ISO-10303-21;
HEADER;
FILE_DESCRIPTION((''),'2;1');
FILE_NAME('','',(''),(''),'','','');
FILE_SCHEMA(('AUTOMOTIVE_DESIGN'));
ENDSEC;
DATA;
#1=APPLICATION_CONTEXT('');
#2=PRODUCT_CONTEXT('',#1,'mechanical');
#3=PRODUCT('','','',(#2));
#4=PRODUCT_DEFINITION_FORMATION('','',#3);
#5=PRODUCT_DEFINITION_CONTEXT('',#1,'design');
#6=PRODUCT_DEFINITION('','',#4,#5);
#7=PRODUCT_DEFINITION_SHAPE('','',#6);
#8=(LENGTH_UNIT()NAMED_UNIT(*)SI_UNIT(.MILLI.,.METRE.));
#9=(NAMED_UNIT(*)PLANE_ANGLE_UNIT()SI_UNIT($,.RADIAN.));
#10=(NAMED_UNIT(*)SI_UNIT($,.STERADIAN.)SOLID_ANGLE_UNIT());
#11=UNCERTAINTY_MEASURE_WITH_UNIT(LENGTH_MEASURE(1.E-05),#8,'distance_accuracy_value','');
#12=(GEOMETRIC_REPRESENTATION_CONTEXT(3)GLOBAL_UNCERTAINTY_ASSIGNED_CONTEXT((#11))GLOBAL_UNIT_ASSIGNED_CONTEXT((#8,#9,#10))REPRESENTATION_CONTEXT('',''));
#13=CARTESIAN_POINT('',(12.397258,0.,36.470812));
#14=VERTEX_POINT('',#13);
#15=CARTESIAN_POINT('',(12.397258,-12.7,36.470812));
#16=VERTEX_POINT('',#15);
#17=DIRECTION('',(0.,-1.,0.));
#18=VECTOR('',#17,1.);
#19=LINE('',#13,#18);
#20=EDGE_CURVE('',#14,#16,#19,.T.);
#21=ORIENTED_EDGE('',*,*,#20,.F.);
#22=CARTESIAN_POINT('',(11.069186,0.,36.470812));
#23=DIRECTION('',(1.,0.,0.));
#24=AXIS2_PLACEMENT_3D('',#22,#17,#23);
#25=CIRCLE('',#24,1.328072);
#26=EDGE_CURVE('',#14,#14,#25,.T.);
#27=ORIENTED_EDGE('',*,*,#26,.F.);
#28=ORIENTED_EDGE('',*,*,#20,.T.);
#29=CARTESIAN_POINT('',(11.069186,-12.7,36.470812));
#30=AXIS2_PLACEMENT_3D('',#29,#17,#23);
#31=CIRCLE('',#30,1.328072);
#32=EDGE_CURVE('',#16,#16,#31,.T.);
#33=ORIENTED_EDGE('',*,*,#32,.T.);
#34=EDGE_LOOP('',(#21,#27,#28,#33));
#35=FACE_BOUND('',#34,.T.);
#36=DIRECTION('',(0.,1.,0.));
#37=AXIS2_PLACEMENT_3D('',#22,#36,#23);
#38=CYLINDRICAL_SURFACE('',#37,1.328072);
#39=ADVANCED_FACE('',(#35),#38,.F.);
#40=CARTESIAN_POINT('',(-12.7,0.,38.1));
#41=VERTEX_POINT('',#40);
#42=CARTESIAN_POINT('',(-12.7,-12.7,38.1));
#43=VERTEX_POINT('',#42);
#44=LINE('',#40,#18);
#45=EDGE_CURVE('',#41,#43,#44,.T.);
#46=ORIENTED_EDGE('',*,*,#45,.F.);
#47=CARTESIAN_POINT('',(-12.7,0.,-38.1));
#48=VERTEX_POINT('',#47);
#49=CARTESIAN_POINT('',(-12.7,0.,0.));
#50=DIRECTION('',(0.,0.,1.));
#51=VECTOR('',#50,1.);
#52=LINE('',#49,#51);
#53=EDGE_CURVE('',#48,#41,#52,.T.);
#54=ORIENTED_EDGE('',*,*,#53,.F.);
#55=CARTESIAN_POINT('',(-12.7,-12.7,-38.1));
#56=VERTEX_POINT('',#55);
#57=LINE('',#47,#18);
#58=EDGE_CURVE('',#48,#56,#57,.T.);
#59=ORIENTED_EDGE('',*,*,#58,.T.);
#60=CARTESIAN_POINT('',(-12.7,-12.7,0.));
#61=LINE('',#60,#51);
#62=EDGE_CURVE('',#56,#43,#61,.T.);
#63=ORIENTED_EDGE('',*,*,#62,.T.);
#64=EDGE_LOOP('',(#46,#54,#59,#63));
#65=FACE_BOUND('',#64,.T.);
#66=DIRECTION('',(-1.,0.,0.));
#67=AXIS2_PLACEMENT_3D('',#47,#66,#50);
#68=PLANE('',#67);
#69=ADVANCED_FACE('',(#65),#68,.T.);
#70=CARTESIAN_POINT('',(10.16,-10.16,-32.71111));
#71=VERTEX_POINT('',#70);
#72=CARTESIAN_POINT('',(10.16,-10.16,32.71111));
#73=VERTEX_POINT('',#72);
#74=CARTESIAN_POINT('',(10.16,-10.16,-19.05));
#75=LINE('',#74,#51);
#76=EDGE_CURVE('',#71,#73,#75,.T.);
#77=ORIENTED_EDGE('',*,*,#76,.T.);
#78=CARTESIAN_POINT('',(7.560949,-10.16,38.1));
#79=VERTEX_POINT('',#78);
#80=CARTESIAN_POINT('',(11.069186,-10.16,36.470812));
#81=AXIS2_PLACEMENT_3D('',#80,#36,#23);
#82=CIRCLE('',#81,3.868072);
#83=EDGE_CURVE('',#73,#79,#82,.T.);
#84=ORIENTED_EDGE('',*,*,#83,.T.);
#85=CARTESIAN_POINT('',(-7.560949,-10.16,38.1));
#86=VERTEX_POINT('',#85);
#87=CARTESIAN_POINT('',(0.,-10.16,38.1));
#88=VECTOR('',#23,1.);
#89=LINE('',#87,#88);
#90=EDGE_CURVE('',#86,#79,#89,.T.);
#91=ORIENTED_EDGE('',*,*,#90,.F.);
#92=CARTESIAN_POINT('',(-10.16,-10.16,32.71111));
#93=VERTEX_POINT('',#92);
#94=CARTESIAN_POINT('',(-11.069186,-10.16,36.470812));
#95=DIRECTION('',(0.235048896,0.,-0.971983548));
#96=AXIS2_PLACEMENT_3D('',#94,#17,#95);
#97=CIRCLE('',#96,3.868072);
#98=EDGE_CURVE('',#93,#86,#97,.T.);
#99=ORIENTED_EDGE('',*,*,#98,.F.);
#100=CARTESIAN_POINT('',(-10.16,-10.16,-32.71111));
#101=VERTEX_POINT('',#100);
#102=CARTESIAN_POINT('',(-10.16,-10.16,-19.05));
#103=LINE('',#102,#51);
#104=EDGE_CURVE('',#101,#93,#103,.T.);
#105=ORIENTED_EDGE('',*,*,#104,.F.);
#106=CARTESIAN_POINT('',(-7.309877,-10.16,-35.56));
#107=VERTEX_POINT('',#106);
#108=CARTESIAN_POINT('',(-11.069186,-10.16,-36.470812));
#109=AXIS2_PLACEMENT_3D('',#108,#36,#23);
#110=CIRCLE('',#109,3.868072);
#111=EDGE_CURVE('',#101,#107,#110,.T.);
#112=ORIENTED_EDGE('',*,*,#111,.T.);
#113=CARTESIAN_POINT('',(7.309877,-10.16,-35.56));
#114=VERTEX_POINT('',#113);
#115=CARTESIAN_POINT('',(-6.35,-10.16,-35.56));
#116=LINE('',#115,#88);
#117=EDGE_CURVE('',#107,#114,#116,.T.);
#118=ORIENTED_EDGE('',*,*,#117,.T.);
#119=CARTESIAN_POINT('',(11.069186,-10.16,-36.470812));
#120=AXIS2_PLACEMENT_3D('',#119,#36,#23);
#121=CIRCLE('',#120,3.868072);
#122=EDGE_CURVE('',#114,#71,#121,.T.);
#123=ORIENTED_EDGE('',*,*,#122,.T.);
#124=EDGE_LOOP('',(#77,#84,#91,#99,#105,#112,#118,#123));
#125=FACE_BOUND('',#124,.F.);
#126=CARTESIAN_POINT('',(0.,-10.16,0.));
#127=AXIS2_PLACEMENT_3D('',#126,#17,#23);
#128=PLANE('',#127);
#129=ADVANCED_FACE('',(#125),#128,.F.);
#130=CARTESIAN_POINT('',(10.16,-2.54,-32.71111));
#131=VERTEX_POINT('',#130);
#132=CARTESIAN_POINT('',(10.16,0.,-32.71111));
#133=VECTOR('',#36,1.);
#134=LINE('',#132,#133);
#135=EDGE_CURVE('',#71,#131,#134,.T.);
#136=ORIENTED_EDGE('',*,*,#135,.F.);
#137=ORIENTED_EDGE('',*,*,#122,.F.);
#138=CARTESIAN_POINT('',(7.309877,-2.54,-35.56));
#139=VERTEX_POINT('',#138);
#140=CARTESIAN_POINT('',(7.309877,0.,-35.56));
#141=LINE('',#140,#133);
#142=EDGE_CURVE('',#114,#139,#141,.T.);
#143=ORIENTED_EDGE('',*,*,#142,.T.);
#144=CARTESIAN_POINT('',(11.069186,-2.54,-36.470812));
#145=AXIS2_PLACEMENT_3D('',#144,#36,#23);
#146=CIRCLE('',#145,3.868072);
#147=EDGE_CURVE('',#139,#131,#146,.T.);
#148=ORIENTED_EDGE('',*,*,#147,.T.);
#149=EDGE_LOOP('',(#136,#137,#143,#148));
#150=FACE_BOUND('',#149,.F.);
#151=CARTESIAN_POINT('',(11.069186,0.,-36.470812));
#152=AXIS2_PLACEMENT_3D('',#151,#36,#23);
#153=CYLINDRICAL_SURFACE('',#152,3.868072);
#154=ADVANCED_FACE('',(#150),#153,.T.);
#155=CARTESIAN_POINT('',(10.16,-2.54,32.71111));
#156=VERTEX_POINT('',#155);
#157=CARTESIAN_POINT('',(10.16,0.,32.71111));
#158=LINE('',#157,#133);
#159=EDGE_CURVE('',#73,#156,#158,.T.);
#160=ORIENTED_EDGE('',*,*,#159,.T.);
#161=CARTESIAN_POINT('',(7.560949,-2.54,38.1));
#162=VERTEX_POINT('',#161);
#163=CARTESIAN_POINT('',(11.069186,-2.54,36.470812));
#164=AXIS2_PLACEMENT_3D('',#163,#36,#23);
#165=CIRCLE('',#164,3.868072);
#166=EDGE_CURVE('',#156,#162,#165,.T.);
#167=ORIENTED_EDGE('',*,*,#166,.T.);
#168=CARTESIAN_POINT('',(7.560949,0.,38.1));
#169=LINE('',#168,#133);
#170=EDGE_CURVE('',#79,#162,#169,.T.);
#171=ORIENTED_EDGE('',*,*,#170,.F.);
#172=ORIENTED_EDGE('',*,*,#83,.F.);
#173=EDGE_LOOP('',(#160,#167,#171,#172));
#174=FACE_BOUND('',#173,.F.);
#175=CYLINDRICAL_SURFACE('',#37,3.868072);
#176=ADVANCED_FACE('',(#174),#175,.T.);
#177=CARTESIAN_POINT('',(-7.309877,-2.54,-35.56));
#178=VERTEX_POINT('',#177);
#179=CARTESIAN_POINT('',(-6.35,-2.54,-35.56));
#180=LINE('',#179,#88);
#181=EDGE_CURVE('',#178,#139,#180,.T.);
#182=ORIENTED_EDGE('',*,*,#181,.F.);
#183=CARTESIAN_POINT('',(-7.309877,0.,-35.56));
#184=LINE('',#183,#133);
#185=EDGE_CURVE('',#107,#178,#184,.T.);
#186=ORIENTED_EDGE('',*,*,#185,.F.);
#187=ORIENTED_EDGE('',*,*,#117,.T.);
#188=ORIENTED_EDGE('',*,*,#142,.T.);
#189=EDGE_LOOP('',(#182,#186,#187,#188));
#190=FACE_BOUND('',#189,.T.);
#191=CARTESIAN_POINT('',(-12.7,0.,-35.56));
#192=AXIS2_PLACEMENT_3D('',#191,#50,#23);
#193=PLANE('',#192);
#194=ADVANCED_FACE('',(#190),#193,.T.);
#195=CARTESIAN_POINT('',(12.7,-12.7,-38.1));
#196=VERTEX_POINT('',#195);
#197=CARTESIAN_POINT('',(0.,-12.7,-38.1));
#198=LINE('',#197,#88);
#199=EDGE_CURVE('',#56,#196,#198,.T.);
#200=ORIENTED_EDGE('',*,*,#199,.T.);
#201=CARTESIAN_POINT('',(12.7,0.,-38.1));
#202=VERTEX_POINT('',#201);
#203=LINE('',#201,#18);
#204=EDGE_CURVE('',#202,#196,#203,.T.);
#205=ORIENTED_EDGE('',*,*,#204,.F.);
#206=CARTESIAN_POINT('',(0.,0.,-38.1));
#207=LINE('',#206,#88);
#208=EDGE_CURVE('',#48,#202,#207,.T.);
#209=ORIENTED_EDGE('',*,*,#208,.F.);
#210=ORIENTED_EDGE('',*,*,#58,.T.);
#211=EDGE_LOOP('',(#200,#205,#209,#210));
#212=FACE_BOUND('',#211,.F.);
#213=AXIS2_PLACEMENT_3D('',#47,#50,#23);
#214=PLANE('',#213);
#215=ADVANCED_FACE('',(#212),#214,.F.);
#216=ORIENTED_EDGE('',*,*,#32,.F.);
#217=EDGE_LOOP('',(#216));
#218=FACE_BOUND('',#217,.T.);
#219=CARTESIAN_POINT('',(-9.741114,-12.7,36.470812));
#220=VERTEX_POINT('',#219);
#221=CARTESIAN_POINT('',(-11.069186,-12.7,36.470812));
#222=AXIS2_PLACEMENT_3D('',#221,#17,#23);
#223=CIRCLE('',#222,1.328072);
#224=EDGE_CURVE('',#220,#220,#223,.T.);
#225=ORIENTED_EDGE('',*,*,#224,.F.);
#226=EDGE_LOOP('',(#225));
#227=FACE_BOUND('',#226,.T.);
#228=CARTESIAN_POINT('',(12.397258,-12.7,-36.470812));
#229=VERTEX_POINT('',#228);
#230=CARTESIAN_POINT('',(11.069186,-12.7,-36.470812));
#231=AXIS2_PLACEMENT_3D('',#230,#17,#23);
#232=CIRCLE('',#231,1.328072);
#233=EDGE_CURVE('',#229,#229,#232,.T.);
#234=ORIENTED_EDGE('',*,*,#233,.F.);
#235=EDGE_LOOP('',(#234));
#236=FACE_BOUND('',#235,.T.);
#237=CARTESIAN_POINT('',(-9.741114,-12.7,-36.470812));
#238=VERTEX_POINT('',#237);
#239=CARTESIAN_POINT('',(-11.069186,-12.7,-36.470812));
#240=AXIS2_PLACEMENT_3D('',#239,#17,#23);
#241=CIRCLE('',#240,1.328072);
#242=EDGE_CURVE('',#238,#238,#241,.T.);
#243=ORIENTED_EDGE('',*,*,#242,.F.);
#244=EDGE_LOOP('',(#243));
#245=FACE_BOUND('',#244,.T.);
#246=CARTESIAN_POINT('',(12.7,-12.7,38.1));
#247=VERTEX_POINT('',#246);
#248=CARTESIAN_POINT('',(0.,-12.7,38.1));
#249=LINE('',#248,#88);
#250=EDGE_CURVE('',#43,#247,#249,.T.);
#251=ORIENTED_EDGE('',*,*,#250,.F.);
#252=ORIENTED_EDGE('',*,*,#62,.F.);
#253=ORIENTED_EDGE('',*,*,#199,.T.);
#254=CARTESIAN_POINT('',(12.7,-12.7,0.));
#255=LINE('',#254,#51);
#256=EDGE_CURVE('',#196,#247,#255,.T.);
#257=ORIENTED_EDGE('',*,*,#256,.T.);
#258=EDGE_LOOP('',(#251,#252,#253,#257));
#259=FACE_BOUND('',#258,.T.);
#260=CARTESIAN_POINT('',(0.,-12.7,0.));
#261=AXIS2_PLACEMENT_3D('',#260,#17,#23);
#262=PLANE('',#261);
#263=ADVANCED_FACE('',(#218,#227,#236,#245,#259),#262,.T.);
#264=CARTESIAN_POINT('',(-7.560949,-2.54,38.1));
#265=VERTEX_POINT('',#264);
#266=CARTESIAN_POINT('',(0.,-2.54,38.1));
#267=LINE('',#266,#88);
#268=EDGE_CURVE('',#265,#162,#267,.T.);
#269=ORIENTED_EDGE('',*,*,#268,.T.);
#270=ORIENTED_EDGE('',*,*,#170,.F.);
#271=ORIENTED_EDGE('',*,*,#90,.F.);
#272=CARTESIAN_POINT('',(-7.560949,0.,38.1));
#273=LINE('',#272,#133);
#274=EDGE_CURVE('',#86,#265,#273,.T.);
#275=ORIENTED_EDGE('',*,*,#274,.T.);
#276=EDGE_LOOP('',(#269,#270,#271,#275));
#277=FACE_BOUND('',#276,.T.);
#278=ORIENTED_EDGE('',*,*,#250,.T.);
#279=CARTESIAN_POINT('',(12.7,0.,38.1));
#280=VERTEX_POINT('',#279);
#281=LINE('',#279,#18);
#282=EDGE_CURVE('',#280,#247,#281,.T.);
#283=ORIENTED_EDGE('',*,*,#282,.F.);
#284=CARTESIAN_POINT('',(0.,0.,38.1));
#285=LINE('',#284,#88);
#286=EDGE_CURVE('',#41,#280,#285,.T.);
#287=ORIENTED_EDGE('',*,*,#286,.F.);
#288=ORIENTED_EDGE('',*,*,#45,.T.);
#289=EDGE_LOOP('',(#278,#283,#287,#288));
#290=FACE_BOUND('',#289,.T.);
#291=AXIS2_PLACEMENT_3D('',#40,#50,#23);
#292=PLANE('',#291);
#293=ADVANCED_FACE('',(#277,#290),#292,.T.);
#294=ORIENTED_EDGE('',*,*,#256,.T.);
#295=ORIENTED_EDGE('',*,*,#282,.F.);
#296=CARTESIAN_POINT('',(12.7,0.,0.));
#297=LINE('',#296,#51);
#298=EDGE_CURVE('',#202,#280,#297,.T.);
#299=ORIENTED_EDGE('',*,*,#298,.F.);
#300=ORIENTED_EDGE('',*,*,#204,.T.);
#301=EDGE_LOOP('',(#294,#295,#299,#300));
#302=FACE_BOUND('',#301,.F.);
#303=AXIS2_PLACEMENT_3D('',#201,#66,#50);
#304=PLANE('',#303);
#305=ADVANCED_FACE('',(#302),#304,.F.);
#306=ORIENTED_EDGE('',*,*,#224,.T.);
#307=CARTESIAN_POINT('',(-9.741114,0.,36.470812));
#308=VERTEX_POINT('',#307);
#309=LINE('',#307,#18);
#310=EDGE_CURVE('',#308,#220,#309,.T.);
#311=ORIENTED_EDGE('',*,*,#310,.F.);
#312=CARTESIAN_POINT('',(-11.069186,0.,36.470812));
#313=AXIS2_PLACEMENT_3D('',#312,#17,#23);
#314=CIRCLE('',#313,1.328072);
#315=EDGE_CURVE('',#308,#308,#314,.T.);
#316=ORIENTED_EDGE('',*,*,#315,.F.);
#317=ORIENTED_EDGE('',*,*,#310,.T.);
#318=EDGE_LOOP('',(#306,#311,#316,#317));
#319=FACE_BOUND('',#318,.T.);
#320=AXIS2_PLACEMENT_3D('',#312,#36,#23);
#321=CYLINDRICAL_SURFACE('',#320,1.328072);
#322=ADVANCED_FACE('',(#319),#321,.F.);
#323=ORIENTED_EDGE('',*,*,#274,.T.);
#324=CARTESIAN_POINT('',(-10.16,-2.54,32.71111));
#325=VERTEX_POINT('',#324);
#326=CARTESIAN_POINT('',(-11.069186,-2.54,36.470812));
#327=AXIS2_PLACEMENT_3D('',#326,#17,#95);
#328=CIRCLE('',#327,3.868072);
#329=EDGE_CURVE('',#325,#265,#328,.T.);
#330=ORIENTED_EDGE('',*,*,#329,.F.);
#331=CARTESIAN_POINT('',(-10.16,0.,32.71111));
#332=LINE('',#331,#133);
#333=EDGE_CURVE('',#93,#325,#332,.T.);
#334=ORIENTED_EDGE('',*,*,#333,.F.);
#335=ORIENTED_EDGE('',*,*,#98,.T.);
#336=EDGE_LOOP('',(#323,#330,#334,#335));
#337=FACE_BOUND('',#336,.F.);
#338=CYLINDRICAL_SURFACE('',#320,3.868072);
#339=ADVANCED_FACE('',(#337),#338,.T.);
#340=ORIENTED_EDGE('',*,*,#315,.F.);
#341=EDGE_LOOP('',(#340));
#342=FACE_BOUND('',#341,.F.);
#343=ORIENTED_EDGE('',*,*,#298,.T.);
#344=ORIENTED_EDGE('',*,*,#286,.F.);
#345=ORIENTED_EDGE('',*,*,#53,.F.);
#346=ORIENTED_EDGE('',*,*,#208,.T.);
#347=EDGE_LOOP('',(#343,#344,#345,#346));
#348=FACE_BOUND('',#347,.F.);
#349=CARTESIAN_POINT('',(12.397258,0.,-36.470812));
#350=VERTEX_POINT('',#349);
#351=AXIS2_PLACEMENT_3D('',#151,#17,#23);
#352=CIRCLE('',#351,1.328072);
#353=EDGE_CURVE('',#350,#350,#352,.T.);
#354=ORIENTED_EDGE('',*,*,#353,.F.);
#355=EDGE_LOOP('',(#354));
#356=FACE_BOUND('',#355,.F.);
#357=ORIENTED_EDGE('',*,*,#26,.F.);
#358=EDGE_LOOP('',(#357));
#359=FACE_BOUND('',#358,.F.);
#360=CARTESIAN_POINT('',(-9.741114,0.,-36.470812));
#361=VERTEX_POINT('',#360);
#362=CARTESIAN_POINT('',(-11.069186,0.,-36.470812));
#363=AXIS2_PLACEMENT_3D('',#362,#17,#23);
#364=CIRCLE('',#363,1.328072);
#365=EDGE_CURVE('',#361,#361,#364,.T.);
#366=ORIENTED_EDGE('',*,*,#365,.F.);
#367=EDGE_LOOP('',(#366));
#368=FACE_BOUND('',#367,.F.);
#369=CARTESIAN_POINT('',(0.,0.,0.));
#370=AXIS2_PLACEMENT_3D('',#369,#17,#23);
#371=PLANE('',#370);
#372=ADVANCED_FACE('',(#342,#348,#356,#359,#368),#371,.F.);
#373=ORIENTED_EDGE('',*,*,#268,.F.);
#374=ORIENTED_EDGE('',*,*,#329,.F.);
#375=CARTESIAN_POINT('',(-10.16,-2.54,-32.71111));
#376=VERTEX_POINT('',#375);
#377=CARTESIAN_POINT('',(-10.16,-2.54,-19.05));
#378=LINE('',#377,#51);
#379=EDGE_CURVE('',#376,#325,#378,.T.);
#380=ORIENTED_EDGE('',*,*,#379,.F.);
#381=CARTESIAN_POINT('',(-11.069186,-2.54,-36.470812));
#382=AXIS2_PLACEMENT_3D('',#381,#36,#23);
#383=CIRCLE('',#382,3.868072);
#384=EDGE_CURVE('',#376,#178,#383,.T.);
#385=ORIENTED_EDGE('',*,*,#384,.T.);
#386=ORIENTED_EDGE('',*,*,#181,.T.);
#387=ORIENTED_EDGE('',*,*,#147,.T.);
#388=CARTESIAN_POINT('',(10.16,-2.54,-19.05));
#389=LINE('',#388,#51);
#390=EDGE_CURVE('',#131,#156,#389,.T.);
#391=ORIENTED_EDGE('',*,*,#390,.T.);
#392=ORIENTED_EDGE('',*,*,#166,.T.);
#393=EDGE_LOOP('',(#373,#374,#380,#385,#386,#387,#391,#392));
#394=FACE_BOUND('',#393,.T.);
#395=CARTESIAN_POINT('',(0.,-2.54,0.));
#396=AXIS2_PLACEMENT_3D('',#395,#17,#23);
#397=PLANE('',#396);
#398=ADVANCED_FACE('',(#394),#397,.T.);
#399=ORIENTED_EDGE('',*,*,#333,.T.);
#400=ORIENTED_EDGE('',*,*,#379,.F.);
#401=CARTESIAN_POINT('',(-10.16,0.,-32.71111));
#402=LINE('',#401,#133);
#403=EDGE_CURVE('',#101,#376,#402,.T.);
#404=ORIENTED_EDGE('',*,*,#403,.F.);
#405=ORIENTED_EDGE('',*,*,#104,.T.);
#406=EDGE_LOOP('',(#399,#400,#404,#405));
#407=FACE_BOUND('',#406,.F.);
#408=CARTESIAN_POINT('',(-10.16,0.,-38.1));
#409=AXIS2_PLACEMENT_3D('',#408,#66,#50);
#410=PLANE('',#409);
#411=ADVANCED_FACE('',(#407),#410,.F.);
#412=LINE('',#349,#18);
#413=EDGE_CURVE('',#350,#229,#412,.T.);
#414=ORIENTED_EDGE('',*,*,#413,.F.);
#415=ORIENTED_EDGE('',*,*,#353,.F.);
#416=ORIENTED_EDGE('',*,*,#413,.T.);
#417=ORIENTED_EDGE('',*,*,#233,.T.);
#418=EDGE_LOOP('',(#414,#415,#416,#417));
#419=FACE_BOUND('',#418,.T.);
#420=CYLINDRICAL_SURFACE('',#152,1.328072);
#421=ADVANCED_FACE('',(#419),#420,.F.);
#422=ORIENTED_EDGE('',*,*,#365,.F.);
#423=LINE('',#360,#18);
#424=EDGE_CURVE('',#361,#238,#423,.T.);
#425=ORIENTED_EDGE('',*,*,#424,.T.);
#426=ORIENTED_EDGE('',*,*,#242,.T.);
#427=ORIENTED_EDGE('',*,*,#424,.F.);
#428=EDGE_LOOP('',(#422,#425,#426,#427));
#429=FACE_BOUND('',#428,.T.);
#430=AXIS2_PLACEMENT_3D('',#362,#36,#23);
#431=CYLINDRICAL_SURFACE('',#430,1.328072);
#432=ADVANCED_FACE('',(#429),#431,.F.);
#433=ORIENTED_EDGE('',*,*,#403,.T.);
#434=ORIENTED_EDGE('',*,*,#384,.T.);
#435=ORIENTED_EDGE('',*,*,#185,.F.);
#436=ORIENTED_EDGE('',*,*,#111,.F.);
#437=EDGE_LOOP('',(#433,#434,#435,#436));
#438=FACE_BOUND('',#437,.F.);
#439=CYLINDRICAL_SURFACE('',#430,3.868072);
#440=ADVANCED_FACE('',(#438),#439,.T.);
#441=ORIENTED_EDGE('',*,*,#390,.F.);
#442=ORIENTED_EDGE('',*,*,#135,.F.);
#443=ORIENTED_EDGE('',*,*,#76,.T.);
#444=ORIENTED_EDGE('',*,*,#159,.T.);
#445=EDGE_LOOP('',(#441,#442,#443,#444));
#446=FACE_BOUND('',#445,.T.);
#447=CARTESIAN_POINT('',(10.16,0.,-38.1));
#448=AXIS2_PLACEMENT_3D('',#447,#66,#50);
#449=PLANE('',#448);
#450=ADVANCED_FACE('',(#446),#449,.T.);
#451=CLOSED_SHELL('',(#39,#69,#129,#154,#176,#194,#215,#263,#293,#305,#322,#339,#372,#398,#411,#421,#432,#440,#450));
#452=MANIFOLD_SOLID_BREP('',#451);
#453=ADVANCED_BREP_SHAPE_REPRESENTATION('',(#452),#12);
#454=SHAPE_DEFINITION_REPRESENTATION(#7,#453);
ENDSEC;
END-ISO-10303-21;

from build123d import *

# Parameters (mm, degrees)
F0_W     = 25.4
F0_H     = 76.2
F0_R     = 1.328071913
F1_DEPTH = 12.7
F2_T     = 2.54


# Not quite as in the source:
# - a shell that OpenCascade refuses in one call is made with other operations: the cavity is built on its own and cut out


with BuildPart() as f1:
    # F0 (on Front) → F1 (new body)
    with BuildSketch(Plane.XZ):
        Rectangle(F0_W, F0_H)
        with Locations((-11.0691860318, -36.4708118141)):
            Circle(F0_R, mode=Mode.SUBTRACT)
        with Locations((11.0691860318, -36.4708118141)):
            Circle(F0_R, mode=Mode.SUBTRACT)
        with Locations((-11.0691860318, 36.4708118141)):
            Circle(F0_R, mode=Mode.SUBTRACT)
        with Locations((11.0691860318, 36.4708118141)):
            Circle(F0_R, mode=Mode.SUBTRACT)
    extrude(amount=F1_DEPTH)

    # F2: shell of thickness 2.54, made by hand


with BuildPart() as f2_core1:
    # F2_t2: copy of F1
    add(f1.part)

    # the walls: a layer under each face that stays
    f2_faces = [f2_core1.faces().sort_by_distance(p)[0] for p in [
        (12.7, -6.35, 0),
        (-12.7, -6.35, 0),
        (0, -6.35, -38.1),
        (-12.3972579448, -6.35, -36.4708118141),
        (9.7411141188, -6.35, -36.4708118141),
        (-12.3972579448, -6.35, 36.4708118141),
        (9.7411141188, -6.35, 36.4708118141),
        (0, 0, 0),
        (0, -12.7, 0),
    ]]
    thicken(f2_faces, amount=-F2_T, mode=Mode.SUBTRACT)


with BuildPart() as f1_1:
    add(f1.part)

    # what is left inside the walls is the cavity
    f2_cavity = [f2_core1.part.solids().sort_by_distance(p)[0] for p in [
        (0, -2.5654, -11.006667),
    ]]
    add(f2_cavity, mode=Mode.SUBTRACT)


solid = f1_1.part
